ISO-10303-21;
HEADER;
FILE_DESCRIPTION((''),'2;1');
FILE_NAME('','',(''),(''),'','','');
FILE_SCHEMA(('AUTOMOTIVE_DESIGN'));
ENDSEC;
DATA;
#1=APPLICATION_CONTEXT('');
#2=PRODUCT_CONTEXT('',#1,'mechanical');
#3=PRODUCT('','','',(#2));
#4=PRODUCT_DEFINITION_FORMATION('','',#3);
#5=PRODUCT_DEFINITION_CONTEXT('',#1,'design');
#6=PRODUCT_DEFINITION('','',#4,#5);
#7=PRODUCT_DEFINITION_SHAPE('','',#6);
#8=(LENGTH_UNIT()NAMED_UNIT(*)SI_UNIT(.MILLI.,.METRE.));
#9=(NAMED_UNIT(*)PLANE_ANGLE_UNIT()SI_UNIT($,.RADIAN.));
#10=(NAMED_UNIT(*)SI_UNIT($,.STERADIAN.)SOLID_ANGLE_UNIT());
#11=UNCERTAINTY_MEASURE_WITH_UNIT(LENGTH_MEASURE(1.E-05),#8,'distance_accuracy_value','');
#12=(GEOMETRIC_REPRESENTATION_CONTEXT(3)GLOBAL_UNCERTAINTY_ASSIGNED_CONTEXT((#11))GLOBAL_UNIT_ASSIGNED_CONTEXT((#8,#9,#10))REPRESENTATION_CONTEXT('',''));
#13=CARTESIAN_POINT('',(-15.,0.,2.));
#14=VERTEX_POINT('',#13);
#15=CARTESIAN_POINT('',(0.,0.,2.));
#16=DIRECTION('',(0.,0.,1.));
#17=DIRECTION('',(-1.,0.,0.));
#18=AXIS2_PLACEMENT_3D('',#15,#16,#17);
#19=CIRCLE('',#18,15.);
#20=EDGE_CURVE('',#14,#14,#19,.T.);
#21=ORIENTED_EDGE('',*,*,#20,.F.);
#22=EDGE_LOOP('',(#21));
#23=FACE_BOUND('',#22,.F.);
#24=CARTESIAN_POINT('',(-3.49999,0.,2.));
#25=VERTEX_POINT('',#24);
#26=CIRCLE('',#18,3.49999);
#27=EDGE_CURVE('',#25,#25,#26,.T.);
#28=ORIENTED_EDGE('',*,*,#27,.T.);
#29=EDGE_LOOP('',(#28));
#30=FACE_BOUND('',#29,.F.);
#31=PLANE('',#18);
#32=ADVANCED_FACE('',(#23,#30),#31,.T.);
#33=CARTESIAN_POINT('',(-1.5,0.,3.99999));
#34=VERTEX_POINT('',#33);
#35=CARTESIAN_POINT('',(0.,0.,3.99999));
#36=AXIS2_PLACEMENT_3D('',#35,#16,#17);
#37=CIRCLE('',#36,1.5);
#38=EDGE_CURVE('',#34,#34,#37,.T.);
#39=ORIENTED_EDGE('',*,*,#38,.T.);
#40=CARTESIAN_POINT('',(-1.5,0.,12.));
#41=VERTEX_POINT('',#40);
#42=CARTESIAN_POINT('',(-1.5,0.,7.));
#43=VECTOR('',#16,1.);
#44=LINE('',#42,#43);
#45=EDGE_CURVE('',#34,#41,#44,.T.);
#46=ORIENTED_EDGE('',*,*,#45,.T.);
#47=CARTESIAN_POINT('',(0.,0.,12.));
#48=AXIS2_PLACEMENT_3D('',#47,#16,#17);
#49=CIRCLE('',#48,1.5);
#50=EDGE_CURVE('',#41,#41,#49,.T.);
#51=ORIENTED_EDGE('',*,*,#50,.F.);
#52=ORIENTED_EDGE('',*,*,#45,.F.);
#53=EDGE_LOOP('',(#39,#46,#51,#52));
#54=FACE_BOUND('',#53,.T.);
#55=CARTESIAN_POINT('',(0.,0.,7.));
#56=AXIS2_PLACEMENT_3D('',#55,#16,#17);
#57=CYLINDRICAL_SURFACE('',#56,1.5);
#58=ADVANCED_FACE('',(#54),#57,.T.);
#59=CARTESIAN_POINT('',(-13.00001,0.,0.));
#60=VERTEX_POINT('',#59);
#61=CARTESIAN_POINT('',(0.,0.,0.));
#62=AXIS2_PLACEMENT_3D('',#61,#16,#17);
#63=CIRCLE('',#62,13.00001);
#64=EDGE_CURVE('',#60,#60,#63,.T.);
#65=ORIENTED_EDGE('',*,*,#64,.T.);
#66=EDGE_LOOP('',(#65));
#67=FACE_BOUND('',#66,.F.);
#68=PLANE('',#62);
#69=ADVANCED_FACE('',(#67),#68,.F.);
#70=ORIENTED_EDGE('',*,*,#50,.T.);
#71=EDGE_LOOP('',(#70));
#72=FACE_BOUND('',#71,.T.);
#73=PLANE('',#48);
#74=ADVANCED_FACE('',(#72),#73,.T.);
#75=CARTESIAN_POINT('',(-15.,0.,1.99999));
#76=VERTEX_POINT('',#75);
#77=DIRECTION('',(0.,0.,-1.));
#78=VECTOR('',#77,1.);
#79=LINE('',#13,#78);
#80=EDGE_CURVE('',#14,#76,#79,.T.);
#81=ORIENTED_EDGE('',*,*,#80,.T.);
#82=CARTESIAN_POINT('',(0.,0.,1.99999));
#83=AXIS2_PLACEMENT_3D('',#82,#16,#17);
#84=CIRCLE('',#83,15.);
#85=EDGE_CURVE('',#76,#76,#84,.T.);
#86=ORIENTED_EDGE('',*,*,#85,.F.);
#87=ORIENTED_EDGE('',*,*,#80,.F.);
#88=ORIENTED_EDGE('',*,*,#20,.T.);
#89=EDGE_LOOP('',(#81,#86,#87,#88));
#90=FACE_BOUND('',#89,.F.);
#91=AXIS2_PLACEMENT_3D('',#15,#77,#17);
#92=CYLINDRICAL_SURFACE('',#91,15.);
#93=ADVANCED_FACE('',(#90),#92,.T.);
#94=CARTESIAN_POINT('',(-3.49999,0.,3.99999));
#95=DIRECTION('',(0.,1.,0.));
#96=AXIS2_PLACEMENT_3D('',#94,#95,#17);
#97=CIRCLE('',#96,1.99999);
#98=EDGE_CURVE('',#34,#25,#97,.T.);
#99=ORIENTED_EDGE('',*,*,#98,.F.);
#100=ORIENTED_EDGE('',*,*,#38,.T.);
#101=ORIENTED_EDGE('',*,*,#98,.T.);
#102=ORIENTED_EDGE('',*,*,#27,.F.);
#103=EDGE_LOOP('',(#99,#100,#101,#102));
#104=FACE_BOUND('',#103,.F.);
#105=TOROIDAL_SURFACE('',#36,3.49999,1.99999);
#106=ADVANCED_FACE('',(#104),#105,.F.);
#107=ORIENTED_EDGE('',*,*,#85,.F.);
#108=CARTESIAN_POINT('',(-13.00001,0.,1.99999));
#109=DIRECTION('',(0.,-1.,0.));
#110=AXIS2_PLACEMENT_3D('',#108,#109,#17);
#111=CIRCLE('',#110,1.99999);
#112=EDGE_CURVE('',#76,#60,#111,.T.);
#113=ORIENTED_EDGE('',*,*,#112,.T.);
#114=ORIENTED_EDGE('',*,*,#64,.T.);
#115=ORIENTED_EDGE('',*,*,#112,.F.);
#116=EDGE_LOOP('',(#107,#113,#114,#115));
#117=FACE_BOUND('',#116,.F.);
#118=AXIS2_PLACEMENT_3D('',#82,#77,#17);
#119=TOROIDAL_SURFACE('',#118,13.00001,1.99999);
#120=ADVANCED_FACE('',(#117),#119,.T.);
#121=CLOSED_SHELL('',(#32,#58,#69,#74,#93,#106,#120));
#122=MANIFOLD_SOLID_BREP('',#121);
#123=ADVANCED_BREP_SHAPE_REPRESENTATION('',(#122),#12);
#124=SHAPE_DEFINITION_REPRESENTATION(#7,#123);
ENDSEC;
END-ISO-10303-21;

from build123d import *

# Parameters (mm, degrees)
F0_W = 1.5
F0_H = 10
F2_R = 1.99999


# Not quite as in the source:
# - a fillet or chamfer is up to 0.001 mm smaller than in the source, because OpenCascade refuses the exact size


with BuildPart() as f1:
    # F0 (on Front) → F1 (revolve)
    with BuildSketch(Plane.XZ):
        with Locations((-0.75, 7)):
            Rectangle(F0_W, F0_H)
        Polygon((-15, 0), (0, 0), (0, 2), (-1.5, 2), (-15, 2), align=None)
    revolve(axis=Axis((0, 0, 27.7387052774), (0, 0, 1)))

    # F2 (radius 2 in the source; OpenCascade refuses exactly that, so slightly less here)
    f2_edges = [f1.edges().sort_by_distance(p)[0] for p in [
        (15, 0, 0),
        (1.5, 0, 2),
    ]]
    fillet(f2_edges, radius=F2_R)


solid = f1.part
